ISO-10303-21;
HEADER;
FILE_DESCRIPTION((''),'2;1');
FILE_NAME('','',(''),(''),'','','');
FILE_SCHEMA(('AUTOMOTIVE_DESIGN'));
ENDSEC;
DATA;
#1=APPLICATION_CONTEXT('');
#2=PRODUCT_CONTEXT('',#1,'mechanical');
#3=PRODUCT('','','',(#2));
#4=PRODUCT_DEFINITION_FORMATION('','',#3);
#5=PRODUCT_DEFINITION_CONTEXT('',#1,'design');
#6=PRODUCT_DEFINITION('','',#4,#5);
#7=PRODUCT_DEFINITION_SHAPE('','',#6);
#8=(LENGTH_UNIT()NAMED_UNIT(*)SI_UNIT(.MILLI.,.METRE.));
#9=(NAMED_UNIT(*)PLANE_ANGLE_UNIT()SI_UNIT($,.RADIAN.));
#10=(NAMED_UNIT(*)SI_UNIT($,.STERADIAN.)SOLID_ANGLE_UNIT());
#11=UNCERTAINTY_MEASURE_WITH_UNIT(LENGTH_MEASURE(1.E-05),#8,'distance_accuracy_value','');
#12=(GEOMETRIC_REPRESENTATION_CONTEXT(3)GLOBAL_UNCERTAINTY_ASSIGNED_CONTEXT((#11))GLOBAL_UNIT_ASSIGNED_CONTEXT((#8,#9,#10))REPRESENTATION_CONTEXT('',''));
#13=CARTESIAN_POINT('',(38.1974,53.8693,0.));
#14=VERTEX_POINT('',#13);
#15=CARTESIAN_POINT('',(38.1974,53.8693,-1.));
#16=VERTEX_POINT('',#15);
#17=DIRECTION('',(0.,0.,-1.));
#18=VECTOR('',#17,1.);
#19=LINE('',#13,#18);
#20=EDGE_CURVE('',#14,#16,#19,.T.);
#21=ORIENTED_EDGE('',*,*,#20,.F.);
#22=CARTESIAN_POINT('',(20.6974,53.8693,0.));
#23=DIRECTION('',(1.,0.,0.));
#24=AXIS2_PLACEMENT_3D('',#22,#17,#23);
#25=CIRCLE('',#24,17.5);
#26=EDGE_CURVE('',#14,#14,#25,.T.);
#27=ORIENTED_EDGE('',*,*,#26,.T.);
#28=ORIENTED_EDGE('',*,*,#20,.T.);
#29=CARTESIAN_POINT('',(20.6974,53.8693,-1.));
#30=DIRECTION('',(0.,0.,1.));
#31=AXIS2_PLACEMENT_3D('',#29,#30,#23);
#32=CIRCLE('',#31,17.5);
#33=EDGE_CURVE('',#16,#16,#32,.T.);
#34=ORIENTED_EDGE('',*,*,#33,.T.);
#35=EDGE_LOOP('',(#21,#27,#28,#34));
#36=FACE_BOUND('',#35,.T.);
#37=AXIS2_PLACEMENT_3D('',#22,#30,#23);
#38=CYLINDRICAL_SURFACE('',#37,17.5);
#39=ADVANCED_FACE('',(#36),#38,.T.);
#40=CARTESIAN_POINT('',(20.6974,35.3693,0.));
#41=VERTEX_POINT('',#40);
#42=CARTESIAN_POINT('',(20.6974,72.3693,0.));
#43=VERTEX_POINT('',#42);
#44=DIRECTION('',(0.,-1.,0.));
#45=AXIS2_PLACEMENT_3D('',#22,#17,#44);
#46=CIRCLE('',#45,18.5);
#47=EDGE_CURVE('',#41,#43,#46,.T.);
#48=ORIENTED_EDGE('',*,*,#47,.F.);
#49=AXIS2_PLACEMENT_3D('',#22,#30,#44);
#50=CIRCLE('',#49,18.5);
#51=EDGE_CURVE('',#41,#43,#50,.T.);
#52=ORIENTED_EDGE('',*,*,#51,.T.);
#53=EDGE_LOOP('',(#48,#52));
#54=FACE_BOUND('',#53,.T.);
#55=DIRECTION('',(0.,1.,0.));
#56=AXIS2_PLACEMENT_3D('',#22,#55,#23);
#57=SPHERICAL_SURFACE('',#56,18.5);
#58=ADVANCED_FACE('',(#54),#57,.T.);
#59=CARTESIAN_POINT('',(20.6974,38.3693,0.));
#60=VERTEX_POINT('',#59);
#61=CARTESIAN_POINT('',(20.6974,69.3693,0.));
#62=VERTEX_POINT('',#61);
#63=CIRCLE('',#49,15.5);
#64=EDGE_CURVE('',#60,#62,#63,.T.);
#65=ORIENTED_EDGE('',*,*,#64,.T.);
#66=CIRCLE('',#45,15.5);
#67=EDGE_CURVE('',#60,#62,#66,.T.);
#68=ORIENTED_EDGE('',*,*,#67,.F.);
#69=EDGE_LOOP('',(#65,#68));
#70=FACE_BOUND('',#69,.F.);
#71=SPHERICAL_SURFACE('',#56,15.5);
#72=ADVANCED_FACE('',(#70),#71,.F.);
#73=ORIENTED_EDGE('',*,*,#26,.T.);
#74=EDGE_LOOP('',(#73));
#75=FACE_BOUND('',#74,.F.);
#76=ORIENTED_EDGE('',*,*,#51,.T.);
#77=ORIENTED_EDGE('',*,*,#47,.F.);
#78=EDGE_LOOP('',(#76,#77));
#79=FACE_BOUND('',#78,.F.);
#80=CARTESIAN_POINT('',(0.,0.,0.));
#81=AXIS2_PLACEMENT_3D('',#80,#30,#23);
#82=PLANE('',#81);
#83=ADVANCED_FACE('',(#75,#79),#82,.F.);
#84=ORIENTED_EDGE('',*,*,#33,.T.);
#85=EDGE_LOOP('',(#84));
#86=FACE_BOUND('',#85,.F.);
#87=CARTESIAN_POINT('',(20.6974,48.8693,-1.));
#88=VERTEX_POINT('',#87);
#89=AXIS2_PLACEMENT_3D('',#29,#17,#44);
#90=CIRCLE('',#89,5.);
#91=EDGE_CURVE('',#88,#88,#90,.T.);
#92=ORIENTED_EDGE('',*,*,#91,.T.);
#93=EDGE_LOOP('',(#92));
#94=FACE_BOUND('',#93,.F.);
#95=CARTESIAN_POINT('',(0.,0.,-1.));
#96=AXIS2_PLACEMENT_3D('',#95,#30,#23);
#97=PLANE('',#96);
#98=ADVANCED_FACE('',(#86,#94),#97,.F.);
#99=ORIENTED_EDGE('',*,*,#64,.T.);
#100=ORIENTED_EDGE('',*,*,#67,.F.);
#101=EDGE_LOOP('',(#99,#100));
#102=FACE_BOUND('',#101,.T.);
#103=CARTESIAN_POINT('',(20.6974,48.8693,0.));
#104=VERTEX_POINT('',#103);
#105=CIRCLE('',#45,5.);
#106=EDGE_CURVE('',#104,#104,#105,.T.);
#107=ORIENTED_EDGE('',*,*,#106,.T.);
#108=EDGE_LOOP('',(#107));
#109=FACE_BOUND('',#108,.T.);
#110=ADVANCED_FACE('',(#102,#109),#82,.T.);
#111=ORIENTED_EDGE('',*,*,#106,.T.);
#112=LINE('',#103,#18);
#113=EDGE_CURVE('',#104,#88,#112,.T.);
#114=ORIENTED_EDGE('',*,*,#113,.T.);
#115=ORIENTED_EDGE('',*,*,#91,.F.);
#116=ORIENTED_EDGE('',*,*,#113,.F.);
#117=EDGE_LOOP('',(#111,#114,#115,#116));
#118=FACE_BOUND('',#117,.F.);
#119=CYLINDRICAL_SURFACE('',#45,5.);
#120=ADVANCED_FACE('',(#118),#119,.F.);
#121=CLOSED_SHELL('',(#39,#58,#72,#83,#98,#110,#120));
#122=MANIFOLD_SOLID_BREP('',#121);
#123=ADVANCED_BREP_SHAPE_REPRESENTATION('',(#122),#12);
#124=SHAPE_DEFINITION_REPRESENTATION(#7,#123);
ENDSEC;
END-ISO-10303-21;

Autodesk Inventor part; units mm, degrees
ref_plane "YZ Plane" through (0, 0, 0) normal (1, 0, 0) x (0, 1, 0)
ref_plane "XZ Plane" through (0, 0, 0) normal (0, 1, 0) x (-1, 0, 0)
ref_plane "XY Plane" through (0, 0, 0) normal (0, 0, 1) x (1, 0, 0)
sketch "Sketch1" plane through (0, 0, 0) normal (0, 0, 1) x (1, 0, 0)
  arc A0 (20.6974, 35.3693) -> (20.6974, 72.3693) centre (20.6974, 53.8693) ccw
  line L0 (20.6974, 72.3693) -> (20.6974, 35.3693)
  circle A1 centre (20.6974, 53.8693) radius 17.5
  point P0 (0, 0)
  dimension "d0" = 37
  dimension "d2" = 35
revolve "Revolution1" add sketch "Sketch1" angle 180 about axis through (20.6974, 72.3693, 0) along (0, -1, 0) picked at (29.7821, 55.9689) contours L0 A1 A0 | L0 A1
shell "Shell2" thickness 3 removed faces 1 at (14.9315, 56.056, 0)
extrude "Extrusion3" add sketch "Sketch1" against normal blind 1 contours A1 L0 | L0 A1
hole "Hole3" at (20.6974, 53.8693, 0) direction (0, 0, -1) diameter 10 depth 1
properties part number "kaca" material "Polycarbonate, Clear"
